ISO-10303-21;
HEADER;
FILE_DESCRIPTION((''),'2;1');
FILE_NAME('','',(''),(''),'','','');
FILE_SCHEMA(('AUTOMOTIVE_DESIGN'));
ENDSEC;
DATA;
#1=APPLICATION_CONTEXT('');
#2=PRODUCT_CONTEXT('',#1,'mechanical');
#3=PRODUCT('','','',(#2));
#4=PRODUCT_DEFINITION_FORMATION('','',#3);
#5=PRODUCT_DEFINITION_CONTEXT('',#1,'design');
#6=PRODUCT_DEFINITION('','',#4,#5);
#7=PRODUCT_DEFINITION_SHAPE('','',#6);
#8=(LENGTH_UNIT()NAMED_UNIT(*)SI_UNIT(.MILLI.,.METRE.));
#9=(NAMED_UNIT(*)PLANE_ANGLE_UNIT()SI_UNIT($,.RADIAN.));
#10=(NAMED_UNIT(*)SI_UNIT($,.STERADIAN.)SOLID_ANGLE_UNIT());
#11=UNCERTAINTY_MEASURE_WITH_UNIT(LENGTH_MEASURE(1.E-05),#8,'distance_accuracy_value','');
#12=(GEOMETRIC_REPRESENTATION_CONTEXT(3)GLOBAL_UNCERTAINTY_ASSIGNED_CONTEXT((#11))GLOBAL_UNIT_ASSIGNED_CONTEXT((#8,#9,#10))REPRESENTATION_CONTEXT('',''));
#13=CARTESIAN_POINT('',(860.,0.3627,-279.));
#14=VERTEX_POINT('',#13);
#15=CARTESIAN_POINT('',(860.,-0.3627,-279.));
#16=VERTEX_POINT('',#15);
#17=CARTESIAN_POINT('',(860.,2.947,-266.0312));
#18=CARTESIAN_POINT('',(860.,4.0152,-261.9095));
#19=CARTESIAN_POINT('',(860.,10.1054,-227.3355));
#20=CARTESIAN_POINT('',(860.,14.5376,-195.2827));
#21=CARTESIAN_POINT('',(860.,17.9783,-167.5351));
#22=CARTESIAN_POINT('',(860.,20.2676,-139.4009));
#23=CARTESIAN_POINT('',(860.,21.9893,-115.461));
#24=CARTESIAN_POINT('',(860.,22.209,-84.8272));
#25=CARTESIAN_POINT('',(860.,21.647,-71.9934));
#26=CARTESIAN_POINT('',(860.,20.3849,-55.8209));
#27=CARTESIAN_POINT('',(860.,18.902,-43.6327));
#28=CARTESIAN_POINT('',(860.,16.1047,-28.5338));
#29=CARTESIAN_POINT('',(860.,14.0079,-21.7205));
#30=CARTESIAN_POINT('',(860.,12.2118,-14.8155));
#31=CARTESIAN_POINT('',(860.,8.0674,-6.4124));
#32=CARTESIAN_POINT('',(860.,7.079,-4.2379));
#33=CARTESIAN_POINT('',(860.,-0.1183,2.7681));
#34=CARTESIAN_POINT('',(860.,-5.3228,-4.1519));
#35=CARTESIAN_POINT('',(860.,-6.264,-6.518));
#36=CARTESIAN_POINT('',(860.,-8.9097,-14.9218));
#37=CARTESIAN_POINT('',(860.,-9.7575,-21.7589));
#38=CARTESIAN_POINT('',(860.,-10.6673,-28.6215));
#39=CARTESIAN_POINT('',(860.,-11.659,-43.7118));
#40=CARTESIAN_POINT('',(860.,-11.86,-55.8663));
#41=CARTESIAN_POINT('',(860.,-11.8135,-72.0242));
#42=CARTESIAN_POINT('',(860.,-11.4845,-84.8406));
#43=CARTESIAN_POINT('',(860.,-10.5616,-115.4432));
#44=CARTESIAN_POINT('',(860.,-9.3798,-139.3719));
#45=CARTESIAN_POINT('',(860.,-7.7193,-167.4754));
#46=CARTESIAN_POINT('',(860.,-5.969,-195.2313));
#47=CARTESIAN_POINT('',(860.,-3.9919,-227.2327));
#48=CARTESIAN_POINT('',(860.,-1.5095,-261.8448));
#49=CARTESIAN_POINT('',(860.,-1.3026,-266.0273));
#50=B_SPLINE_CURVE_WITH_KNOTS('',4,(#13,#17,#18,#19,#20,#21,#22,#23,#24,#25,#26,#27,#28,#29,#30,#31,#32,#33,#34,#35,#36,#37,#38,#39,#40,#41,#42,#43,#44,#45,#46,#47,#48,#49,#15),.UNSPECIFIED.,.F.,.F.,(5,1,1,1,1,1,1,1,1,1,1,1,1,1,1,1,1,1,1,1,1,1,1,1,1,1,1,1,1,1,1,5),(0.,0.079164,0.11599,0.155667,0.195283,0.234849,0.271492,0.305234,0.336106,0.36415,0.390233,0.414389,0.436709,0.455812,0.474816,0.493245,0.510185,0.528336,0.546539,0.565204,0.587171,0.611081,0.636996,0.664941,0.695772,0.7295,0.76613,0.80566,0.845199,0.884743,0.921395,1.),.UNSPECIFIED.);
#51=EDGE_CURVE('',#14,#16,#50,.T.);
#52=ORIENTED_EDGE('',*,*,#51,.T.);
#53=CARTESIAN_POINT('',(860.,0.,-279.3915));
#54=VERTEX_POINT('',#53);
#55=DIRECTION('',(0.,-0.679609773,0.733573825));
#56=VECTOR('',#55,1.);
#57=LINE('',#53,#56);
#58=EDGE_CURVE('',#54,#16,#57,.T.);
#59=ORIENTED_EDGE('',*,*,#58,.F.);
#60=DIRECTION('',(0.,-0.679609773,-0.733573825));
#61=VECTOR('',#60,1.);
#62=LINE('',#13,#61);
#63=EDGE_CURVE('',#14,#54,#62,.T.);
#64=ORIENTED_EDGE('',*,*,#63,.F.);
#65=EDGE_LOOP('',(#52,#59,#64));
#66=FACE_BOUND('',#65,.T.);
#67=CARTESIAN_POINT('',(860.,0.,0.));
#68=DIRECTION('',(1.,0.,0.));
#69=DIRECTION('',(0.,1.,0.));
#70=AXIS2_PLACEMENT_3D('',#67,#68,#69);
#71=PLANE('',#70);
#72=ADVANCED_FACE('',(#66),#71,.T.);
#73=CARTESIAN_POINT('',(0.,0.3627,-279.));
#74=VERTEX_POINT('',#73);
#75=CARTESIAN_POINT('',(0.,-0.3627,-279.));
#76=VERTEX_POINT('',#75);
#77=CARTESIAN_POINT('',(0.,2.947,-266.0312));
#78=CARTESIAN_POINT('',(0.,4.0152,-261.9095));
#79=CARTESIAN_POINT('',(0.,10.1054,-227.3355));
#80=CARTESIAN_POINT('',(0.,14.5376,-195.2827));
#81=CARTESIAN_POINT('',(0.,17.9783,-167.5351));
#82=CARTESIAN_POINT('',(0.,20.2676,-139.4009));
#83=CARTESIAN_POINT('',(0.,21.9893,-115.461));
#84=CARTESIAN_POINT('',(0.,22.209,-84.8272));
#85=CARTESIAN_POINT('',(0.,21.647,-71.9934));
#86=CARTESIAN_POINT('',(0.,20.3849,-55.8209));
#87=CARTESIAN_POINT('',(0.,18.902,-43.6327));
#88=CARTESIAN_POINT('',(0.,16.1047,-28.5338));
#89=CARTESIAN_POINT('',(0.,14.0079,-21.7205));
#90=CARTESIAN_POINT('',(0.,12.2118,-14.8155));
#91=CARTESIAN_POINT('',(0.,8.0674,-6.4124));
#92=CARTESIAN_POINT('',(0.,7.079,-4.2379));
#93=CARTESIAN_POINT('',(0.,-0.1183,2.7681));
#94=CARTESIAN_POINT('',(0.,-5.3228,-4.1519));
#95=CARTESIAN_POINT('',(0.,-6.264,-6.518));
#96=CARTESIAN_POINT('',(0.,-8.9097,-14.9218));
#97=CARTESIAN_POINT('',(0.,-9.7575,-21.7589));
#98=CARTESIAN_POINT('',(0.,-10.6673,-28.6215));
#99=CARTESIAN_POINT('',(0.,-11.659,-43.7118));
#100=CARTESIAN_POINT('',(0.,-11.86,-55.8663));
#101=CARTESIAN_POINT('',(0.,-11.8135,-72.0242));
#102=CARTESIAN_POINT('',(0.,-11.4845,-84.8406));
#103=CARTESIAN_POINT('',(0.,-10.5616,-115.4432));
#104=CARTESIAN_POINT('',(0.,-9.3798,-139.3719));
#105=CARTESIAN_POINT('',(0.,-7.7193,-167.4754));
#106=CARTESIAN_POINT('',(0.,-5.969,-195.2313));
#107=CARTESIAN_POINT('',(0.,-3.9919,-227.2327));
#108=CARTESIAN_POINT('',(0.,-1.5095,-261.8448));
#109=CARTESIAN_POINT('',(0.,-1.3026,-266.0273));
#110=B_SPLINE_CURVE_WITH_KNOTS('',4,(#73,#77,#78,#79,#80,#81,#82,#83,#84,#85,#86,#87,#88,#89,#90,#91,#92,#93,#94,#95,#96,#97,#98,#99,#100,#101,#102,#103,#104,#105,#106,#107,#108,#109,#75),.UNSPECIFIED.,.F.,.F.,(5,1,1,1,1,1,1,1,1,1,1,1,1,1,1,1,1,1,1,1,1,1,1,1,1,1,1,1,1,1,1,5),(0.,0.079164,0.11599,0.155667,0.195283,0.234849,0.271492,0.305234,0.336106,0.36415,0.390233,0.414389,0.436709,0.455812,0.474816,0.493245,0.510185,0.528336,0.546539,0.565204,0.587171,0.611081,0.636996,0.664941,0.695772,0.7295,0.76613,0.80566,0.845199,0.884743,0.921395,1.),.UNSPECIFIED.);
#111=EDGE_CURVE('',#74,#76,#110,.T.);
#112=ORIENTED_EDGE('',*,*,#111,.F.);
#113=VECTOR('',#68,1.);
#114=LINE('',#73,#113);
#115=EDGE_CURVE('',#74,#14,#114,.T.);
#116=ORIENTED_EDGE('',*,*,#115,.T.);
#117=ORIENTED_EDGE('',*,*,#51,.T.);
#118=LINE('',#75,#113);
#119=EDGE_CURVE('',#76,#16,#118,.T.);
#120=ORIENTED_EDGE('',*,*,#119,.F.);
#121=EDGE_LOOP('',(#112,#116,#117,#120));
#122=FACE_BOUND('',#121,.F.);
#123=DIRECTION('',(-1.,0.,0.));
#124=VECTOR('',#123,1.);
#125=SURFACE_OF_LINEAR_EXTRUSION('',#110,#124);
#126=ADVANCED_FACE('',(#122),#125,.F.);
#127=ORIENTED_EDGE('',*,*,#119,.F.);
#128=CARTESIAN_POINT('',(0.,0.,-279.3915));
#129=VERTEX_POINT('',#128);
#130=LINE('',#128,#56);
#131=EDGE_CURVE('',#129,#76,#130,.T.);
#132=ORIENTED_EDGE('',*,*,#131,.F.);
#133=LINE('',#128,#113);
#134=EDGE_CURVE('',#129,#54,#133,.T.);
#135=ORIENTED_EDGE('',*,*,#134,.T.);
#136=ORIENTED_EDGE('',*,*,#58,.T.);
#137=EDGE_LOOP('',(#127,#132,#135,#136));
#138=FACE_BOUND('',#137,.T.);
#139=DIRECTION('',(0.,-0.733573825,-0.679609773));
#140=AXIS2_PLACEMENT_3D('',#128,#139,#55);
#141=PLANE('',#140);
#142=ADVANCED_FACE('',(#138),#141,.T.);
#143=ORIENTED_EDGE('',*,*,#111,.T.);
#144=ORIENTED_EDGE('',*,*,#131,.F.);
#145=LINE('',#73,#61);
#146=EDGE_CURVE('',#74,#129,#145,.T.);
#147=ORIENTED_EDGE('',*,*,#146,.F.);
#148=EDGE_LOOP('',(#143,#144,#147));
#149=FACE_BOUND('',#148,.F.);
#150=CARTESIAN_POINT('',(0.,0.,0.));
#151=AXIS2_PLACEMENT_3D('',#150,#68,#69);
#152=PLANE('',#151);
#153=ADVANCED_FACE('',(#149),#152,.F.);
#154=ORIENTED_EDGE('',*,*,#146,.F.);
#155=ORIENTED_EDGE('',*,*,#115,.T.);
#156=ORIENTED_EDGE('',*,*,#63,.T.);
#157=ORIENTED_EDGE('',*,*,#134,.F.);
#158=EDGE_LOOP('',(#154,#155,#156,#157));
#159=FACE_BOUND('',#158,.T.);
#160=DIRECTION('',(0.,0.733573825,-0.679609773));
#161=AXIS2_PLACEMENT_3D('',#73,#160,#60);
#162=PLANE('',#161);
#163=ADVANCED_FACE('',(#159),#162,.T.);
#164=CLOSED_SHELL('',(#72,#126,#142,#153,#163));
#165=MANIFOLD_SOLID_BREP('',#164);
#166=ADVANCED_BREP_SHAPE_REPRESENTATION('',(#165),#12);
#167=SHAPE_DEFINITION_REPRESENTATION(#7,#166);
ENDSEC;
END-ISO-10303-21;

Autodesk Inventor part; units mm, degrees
ref_plane "YZ Plane" through (0, 0, 0) normal (1, 0, 0) x (0, 1, 0)
ref_plane "XZ Plane" through (0, 0, 0) normal (0, 1, 0) x (-1, 0, 0)
sketch "Sketch1" plane through (0, 0, 0) normal (1, 0, 0) x (0, 1, 0)
  spline S0 degree 4 poles (0.3627, -279) (2.947, -266.0312) (4.0152, -261.9095) (10.1054, -227.3355) (14.5376, -195.2827) (17.9783, -167.5351) (20.2676, -139.4009) (21.9893, -115.461) (22.209, -84.8272) (21.647, -71.9934) (20.3849, -55.8209) (18.902, -43.6327) (16.1047, -28.5338) (14.0079, -21.7205) (12.2118, -14.8155) (8.0674, -6.4124) (7.079, -4.2379) (-0.1183, 2.7681) (-5.3228, -4.1519) (-6.264, -6.518) (-8.9097, -14.9218) (-9.7575, -21.7589) (-10.6673, -28.6215) (-11.659, -43.7118) (-11.86, -55.8663) (-11.8135, -72.0242) (-11.4845, -84.8406) (-10.5616, -115.4432) (-9.3798, -139.3719) (-7.7193, -167.4754) (-5.969, -195.2313) (-3.9919, -227.2327) (-1.5095, -261.8448) (-1.3026, -266.0273) (-0.3627, -279) knots 0 0 0 0 0 0.079164 0.11599 0.155667 0.195283 0.234849 0.271492 0.305234 0.336106 0.36415 0.390233 0.414389 0.436709 0.455812 0.474816 0.493245 0.510185 0.528336 0.546539 0.565204 0.587171 0.611081 0.636996 0.664941 0.695772 0.7295 0.76613 0.80566 0.845199 0.884743 0.921395 1 1 1 1 1
  line L0 (0.3627, -279) -> (0, -279.3915)
  line L1 (0, -279.3915) -> (-0.3627, -279)
  point P0 (0, 0)
  point P1 (3.1806, -265.05)
  point P2 (5.8032, -251.1)
  point P3 (10.4625, -223.2)
  point P4 (14.4522, -195.3)
  point P5 (17.7444, -167.4)
  point P6 (20.1996, -139.5)
  point P7 (21.762, -111.6)
  point P8 (21.9852, -83.7)
  point P9 (21.3993, -69.75)
  point P10 (20.2554, -55.8)
  point P11 (18.4419, -41.85)
  point P12 (15.7077, -27.9)
  point P13 (13.8384, -20.925)
  point P14 (11.5227, -13.95)
  point P15 (8.3421, -6.975)
  point P16 (5.9985, -3.4875)
  point P17 (0, 0)
  point P18 (-4.6035, -3.4875)
  point P19 (-6.3333, -6.975)
  point P20 (-8.3979, -13.95)
  point P21 (-9.6534, -20.925)
  point P22 (-10.4625, -27.9)
  point P23 (-11.439, -41.85)
  point P24 (-11.8017, -55.8)
  point P25 (-11.7738, -69.75)
  point P26 (-11.4948, -83.7)
  point P27 (-10.602, -111.6)
  point P28 (-9.3186, -139.5)
  point P29 (-7.7004, -167.4)
  point P30 (-5.9706, -195.3)
  point P31 (-4.185, -223.2)
  point P32 (-2.2878, -251.1)
  point P33 (-1.3392, -265.05)
  point P34 (8.3421, -6.975)
extrude "Extrusion1" add sketch "Sketch1" along normal blind 860
sketch "Sketch2" plane through (860, 0, 0) normal (1, 0, 0) x (0, 0, -1)
  line L0 (1.5803, -0.3627) -> (279, -0.3627)
  point P0 (0, 0)
ref_plane "Work Plane1" through (860, -0.3627, -1.5803) normal (0.9993908, 0.0348995, 0) x (0, 0, -1)
ref_plane "Work Plane2" through (430, 0, 0) normal (1, 0, 0) x (0, 0, -1)
mirror "Mirror1" about plane through (430, 0, 0) normal (1, 0, 0)
ref_plane "Work Plane3" through (0, -0.3627, -1.5803) normal (0.9993908, -0.0348995, 0) x (0, 0, -1)
properties part number "Generic Wing 1"
